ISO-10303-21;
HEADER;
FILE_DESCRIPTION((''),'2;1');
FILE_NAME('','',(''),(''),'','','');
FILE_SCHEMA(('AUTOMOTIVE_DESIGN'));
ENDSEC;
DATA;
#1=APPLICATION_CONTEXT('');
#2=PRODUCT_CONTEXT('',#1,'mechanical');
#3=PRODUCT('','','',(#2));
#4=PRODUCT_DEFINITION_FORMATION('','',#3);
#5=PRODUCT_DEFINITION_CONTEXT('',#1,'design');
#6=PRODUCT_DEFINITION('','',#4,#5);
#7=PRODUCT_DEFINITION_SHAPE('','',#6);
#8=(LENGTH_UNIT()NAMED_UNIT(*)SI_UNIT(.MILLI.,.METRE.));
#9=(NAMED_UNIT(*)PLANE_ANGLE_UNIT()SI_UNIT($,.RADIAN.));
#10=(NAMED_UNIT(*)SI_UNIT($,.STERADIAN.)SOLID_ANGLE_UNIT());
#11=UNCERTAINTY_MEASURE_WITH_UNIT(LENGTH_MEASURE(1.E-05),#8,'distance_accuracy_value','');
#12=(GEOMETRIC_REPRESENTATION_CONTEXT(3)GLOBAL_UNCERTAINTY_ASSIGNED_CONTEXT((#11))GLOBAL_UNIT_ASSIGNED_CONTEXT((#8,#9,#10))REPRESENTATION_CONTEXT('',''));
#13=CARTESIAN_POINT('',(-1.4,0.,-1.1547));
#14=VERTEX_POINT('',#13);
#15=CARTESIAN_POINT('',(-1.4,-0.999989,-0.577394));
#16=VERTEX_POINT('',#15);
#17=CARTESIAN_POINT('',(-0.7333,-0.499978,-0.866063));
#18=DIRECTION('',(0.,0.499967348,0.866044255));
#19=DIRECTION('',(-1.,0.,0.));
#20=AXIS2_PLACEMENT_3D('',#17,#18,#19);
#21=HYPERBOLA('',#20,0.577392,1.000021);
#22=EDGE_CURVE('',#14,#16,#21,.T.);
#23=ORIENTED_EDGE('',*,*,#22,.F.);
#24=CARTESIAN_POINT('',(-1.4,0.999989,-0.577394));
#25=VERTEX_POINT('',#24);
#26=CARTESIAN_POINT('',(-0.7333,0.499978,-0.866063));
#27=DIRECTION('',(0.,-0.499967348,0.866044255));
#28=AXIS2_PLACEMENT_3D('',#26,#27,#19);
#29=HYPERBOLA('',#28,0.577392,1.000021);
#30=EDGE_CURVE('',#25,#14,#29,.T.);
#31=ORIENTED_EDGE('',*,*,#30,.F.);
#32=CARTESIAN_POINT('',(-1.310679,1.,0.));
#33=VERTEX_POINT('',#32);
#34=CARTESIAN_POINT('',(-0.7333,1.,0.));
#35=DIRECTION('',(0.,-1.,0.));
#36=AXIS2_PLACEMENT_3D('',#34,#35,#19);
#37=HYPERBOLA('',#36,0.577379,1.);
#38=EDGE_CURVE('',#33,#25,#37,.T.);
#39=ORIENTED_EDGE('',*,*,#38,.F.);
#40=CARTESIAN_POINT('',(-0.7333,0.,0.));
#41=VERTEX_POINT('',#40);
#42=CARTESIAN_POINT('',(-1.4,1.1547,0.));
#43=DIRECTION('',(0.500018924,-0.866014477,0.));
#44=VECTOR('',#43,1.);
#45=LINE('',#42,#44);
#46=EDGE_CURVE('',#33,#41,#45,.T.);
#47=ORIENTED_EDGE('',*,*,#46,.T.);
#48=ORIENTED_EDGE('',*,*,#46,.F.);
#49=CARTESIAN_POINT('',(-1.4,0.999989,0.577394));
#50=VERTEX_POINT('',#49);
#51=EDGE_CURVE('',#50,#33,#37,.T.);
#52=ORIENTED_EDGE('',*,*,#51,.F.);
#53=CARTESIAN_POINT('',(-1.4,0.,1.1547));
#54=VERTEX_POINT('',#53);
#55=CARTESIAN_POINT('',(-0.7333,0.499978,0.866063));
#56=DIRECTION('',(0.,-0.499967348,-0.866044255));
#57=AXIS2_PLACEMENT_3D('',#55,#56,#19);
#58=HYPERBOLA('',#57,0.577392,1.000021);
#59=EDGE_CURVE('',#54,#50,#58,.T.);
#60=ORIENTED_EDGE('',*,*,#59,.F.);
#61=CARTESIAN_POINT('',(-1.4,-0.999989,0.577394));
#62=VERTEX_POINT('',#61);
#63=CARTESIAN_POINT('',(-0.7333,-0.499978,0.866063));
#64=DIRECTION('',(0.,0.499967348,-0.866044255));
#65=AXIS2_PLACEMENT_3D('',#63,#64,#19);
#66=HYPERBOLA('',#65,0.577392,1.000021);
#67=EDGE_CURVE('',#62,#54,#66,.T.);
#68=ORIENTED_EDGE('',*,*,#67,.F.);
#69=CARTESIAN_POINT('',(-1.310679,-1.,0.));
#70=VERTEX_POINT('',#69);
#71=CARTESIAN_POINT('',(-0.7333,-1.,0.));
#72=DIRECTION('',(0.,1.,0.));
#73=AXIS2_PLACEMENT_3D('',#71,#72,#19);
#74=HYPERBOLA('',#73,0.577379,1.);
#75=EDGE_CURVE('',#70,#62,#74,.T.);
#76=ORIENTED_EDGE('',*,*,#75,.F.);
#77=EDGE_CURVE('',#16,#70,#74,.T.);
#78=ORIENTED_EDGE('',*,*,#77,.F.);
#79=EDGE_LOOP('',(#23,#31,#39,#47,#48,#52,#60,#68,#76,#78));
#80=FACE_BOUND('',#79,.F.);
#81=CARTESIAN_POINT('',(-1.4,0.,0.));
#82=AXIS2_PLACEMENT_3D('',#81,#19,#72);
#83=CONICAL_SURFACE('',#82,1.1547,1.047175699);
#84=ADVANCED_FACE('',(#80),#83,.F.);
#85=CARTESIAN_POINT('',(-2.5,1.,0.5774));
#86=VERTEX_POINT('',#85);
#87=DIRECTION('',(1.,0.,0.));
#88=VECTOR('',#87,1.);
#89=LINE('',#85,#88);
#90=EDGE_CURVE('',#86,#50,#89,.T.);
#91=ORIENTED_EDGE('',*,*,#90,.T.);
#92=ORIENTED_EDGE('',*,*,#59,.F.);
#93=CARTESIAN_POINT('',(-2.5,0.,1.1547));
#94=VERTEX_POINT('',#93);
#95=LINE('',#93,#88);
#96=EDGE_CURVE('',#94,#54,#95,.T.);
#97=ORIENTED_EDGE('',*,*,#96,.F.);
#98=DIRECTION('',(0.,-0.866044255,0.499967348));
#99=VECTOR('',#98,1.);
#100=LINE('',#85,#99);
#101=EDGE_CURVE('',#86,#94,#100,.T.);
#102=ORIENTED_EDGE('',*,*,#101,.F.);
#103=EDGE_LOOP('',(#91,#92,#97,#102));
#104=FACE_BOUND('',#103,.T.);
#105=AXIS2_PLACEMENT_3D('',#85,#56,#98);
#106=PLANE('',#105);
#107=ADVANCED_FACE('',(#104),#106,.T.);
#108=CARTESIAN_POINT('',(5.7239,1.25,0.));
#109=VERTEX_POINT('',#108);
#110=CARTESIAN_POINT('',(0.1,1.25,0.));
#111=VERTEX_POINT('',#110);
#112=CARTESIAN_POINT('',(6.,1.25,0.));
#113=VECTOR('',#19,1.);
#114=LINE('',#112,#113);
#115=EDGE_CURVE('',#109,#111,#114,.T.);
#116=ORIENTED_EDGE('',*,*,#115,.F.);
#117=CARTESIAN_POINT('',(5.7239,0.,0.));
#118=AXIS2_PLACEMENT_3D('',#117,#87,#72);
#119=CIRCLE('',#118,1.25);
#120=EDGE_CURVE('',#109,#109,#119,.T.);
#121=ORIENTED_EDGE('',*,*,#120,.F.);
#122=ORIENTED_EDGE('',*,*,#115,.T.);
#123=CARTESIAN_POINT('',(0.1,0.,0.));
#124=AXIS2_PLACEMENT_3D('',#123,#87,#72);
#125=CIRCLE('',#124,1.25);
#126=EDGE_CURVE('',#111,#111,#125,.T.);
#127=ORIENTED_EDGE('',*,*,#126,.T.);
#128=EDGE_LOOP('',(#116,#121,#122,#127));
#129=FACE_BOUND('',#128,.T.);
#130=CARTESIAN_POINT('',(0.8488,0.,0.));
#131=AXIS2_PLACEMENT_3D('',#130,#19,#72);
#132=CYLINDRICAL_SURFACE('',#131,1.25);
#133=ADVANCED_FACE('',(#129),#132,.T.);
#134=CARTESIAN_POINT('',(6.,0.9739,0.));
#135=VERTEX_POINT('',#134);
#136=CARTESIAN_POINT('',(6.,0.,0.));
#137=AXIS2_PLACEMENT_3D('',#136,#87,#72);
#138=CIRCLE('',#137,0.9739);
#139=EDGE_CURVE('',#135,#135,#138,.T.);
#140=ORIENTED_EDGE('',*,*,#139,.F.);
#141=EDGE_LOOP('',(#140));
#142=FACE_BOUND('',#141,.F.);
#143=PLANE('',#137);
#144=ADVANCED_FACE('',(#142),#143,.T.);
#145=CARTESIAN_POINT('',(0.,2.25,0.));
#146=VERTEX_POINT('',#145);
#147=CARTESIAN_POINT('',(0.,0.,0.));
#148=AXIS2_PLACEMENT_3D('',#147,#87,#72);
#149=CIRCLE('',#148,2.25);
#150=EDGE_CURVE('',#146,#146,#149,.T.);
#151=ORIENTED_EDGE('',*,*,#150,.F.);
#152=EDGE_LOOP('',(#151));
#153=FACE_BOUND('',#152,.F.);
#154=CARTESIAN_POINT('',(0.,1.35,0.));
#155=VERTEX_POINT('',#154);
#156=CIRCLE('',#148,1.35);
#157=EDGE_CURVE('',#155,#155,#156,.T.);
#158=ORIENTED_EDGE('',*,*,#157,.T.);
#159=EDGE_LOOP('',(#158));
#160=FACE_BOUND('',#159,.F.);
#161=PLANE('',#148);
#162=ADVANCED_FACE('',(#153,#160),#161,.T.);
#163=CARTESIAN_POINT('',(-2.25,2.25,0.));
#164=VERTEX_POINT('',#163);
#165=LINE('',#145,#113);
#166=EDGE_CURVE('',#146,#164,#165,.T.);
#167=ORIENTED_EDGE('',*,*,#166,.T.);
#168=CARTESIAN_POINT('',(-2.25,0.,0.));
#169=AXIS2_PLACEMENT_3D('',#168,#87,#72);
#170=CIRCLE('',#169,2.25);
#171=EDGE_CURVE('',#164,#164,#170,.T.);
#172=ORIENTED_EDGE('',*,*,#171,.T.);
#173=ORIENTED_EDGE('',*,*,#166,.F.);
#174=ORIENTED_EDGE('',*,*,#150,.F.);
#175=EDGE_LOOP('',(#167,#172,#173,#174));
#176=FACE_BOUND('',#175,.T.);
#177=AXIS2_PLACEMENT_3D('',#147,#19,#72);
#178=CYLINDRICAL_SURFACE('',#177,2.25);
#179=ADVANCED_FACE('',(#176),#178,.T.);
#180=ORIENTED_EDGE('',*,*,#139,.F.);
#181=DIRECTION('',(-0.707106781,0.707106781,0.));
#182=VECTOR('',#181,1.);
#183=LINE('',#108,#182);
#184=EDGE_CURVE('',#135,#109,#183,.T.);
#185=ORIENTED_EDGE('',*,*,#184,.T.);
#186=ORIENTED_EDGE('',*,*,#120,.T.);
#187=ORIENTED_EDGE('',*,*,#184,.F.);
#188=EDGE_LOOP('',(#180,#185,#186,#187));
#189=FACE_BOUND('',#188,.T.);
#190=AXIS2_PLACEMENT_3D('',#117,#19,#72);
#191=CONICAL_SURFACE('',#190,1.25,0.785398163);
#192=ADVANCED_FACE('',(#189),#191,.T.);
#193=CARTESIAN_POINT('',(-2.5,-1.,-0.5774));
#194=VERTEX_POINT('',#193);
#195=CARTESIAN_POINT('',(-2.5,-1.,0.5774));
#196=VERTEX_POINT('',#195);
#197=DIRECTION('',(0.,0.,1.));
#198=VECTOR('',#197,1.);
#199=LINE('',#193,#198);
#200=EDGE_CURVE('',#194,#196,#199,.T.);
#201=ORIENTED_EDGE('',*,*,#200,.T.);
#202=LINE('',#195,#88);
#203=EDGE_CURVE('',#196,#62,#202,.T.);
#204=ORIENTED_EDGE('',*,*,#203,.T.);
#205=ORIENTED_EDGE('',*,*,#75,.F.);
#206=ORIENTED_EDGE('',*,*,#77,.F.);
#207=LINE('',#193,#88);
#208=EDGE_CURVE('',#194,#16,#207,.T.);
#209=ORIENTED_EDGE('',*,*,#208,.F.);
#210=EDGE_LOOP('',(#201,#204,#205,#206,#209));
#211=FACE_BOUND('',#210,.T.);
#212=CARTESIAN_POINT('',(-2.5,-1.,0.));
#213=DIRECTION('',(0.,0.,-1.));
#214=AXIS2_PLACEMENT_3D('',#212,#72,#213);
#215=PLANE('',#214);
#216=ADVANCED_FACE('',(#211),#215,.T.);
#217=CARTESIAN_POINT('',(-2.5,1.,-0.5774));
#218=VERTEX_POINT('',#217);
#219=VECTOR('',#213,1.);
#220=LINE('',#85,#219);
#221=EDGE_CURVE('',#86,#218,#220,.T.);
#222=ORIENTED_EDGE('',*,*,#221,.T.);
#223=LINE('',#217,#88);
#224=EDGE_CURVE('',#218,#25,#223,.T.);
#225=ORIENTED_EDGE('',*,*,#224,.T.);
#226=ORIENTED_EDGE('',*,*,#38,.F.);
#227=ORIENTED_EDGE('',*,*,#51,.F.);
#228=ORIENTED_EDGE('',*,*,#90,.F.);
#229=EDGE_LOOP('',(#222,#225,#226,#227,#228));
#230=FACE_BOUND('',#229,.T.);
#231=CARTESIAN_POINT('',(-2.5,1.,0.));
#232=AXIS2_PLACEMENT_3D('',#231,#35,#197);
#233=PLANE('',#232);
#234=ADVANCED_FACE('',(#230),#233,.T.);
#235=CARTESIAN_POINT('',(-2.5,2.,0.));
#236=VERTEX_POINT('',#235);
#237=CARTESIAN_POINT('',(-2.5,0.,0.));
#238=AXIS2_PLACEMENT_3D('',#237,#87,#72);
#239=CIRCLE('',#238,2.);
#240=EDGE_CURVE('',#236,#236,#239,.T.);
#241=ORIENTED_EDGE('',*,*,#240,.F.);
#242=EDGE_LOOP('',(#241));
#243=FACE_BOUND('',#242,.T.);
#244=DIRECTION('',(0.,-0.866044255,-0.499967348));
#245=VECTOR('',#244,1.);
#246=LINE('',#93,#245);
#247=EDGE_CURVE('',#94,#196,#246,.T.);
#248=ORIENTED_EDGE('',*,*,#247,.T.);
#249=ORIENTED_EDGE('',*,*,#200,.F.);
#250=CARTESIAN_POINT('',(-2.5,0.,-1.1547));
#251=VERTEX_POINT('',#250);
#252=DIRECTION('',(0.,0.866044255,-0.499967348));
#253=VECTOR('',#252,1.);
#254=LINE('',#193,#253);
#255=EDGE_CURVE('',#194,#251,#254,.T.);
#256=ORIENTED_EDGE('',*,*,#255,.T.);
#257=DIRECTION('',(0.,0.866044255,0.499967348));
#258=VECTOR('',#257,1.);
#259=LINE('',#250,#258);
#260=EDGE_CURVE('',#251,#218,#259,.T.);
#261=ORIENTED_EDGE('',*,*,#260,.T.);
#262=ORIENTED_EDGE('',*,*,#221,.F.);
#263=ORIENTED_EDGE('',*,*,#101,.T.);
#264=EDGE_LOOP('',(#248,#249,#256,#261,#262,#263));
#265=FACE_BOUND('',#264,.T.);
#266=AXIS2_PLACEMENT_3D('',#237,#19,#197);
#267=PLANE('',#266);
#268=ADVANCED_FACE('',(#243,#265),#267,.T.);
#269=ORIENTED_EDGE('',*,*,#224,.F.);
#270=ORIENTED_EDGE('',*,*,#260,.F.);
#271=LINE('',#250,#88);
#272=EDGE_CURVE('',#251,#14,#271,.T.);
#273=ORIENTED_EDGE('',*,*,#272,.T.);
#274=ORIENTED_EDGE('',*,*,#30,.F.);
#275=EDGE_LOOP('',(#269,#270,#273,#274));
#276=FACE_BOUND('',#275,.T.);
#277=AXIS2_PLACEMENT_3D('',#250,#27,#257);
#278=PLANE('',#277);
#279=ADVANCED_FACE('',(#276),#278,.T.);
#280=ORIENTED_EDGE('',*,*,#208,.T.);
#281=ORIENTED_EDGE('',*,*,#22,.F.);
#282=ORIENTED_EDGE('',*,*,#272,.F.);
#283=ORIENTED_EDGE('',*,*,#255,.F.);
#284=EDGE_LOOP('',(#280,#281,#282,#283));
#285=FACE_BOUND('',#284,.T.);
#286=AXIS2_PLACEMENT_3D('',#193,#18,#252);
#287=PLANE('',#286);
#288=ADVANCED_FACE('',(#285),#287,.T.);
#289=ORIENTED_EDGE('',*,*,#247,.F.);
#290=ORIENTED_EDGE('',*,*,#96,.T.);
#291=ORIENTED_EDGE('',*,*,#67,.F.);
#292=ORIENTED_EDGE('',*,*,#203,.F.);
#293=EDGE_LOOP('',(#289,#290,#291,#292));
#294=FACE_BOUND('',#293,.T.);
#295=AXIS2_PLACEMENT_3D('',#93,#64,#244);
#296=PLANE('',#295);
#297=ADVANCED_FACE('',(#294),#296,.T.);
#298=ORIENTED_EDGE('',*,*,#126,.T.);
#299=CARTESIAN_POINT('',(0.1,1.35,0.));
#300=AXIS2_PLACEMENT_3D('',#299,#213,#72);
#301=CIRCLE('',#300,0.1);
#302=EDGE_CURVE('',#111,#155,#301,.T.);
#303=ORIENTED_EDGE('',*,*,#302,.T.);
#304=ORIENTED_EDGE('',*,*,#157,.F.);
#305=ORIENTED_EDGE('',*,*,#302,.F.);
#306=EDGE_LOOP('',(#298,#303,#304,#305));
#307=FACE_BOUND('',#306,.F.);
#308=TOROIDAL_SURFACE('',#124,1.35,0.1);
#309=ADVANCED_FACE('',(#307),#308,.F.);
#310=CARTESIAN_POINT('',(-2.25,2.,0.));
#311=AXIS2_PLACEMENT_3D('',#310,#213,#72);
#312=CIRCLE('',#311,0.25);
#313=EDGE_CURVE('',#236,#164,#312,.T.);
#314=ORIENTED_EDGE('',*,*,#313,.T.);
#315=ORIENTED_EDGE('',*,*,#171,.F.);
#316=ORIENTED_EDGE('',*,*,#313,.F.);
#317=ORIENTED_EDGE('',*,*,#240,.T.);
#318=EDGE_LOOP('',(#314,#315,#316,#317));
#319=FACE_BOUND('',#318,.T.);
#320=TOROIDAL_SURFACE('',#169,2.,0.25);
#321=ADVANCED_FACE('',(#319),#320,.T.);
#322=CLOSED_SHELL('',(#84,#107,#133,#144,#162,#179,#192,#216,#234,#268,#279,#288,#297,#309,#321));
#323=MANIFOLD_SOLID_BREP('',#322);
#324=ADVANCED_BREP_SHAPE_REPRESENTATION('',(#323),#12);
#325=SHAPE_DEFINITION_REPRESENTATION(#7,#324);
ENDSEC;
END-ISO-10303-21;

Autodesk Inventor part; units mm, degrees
ref_plane "YZ Plane" through (0, 0, 0) normal (1, 0, 0) x (0, 1, 0)
ref_plane "XZ Plane" through (0, 0, 0) normal (0, 1, 0) x (-1, 0, 0)
sketch "Sketch1" plane through (0, 0, 0) normal (0, 0, 1) x (1, 0, 0)
  line L0 (-0.7333, 0) -> (6, 0)
  line L1 (6, 0) -> (6, 1.25)
  line L2 (6, 1.25) -> (1.125, 1.25)
  line L3 (1.125, 1.25) -> (0.8488, 1.25)
  line L4 (0.8488, 1.25) -> (0, 1.25)
  line L5 (0, 1.25) -> (0, 2.25)
  line L6 (0, 2.25) -> (-2.5, 2.25)
  line L7 (-2.5, 2.25) -> (-2.5, 1.1547)
  line L8 (-2.5, 1.1547) -> (-1.4, 1.1547)
  line L9 (-1.4, 1.1547) -> (-0.7333, 0)
  line L10 (-4.2, 0) -> (7.7, 0) projected
  line L11 (0, -0.45) -> (0, 2.7) projected
  line L12 (1.125, 1.25) -> (0, 1.25) construction
  dimension "d1" = 4.875
  dimension "d2" = 0.2762
  dimension "d3" = 2.5
  dimension "d4" = 1.1
  dimension "d5" = 60
  dimension "d6" = 2.5
  dimension "d7" = 2.5
  dimension "d8" = 2.3094
  dimension "d9" = 4.5
  dimension "d26" = 6
revolve "Body" add sketch "Sketch1" angle 360 about axis through (-0.7333, 0, 0) along (1, 0, 0)
sketch "Sketch2" plane through (-2.5, 0, 0) normal (-1, 0, 0) x (0, 0, 1)
  circle A0 centre (0, 0) radius 1.1547 projected
  line L0 (0, -3.15) -> (0, 3.15) projected
  line L1 (-3.15, 0) -> (3.15, 0) projected
  line L2 (1.1547, 0) -> (0.5774, -1)
  line L3 (0.5774, -1) -> (-0.5774, -1)
  line L4 (-0.5774, -1) -> (-1.1547, 0)
  line L5 (-1.1547, 0) -> (-0.5774, 1)
  line L6 (-0.5774, 1) -> (0.5774, 1)
  line L7 (0.5774, 1) -> (1.1547, 0)
extrude "Slot" add sketch "Sketch2" against normal up to next contours L7 A0 | A0 L2 | L6 L0 A0 | A0 L0 L3 | L0 L6 A0 | A0 L3 L0 | L4 A0 | A0 L5
fillet "Fillet1" radius 0.25 1 edges at (-2.5, -2.25, 0)
thread "Thread" size "M2.5x0.45" class "6g" standard "ISO Metric profile" length 4.875
chamfer "Chamfer1" distance 0.2761 distance2 0.2761 1 edges at (6, -1.25, 0) measured on face at (6, -0.1825, -0.5629)
ref_plane "Work Plane1" through (29, 0, 0) normal (0, -1, 0) x (1, 0, 0)
fillet "Fillet2" radius 0.1 1 edges at (0, -1.25, 0)
equation "\"d30\" = R"
equation "\"d17\" = RR"
equation "\"d13\" = GEL"
equation "\"d15\" = -0.5 * SPD + 0.5 * GD"
equation "\"d16\" = GUL"
equation "\"d1\" = GEL"
equation "\"d3\" = KOH"
equation "\"d4\" = INTI"
equation "\"d6\" = GD"
equation "\"d7\" = BDM"
equation "\"d8\" = 1.1547 * SW"
equation "\"d9\" = KOD"
equation "\"d26\" = NLG"
equation "\"GD\" = 2.5"
equation "\"NLG\" = 6"
equation "\"GEL\" = 4.875"
equation "\"KOD\" = 4.5"
equation "\"KOH\" = 2.5"
equation "\"INTI\" = 1.1"
equation "\"GAL\" = 0.61345 * PTC"
equation "\"GUL\" = 0.61345 * PTC"
equation "\"BDM\" = NND"
equation "\"SW\" = 2"
equation "\"RR\" = 0.25"
equation "\"SPD\" = NND - 1.2269 * PTC"
equation "\"R\" = 0.1"
equation "\"TOA\" = 30deg"
equation "\"GD1\" = THREADDIA - 1.2269 * PTC"
equation "\"THREADDIA\" = 2.5"
equation "\"FAWI\" = 45deg"
equation "\"PTC\" = 0.45"
equation "\"NND\" = 2.5"
equation "\"E0\" = 1.155 * SW"
properties part number "ISO 4762 - M2,5 x 6" material "Stainless Steel, 440C"
